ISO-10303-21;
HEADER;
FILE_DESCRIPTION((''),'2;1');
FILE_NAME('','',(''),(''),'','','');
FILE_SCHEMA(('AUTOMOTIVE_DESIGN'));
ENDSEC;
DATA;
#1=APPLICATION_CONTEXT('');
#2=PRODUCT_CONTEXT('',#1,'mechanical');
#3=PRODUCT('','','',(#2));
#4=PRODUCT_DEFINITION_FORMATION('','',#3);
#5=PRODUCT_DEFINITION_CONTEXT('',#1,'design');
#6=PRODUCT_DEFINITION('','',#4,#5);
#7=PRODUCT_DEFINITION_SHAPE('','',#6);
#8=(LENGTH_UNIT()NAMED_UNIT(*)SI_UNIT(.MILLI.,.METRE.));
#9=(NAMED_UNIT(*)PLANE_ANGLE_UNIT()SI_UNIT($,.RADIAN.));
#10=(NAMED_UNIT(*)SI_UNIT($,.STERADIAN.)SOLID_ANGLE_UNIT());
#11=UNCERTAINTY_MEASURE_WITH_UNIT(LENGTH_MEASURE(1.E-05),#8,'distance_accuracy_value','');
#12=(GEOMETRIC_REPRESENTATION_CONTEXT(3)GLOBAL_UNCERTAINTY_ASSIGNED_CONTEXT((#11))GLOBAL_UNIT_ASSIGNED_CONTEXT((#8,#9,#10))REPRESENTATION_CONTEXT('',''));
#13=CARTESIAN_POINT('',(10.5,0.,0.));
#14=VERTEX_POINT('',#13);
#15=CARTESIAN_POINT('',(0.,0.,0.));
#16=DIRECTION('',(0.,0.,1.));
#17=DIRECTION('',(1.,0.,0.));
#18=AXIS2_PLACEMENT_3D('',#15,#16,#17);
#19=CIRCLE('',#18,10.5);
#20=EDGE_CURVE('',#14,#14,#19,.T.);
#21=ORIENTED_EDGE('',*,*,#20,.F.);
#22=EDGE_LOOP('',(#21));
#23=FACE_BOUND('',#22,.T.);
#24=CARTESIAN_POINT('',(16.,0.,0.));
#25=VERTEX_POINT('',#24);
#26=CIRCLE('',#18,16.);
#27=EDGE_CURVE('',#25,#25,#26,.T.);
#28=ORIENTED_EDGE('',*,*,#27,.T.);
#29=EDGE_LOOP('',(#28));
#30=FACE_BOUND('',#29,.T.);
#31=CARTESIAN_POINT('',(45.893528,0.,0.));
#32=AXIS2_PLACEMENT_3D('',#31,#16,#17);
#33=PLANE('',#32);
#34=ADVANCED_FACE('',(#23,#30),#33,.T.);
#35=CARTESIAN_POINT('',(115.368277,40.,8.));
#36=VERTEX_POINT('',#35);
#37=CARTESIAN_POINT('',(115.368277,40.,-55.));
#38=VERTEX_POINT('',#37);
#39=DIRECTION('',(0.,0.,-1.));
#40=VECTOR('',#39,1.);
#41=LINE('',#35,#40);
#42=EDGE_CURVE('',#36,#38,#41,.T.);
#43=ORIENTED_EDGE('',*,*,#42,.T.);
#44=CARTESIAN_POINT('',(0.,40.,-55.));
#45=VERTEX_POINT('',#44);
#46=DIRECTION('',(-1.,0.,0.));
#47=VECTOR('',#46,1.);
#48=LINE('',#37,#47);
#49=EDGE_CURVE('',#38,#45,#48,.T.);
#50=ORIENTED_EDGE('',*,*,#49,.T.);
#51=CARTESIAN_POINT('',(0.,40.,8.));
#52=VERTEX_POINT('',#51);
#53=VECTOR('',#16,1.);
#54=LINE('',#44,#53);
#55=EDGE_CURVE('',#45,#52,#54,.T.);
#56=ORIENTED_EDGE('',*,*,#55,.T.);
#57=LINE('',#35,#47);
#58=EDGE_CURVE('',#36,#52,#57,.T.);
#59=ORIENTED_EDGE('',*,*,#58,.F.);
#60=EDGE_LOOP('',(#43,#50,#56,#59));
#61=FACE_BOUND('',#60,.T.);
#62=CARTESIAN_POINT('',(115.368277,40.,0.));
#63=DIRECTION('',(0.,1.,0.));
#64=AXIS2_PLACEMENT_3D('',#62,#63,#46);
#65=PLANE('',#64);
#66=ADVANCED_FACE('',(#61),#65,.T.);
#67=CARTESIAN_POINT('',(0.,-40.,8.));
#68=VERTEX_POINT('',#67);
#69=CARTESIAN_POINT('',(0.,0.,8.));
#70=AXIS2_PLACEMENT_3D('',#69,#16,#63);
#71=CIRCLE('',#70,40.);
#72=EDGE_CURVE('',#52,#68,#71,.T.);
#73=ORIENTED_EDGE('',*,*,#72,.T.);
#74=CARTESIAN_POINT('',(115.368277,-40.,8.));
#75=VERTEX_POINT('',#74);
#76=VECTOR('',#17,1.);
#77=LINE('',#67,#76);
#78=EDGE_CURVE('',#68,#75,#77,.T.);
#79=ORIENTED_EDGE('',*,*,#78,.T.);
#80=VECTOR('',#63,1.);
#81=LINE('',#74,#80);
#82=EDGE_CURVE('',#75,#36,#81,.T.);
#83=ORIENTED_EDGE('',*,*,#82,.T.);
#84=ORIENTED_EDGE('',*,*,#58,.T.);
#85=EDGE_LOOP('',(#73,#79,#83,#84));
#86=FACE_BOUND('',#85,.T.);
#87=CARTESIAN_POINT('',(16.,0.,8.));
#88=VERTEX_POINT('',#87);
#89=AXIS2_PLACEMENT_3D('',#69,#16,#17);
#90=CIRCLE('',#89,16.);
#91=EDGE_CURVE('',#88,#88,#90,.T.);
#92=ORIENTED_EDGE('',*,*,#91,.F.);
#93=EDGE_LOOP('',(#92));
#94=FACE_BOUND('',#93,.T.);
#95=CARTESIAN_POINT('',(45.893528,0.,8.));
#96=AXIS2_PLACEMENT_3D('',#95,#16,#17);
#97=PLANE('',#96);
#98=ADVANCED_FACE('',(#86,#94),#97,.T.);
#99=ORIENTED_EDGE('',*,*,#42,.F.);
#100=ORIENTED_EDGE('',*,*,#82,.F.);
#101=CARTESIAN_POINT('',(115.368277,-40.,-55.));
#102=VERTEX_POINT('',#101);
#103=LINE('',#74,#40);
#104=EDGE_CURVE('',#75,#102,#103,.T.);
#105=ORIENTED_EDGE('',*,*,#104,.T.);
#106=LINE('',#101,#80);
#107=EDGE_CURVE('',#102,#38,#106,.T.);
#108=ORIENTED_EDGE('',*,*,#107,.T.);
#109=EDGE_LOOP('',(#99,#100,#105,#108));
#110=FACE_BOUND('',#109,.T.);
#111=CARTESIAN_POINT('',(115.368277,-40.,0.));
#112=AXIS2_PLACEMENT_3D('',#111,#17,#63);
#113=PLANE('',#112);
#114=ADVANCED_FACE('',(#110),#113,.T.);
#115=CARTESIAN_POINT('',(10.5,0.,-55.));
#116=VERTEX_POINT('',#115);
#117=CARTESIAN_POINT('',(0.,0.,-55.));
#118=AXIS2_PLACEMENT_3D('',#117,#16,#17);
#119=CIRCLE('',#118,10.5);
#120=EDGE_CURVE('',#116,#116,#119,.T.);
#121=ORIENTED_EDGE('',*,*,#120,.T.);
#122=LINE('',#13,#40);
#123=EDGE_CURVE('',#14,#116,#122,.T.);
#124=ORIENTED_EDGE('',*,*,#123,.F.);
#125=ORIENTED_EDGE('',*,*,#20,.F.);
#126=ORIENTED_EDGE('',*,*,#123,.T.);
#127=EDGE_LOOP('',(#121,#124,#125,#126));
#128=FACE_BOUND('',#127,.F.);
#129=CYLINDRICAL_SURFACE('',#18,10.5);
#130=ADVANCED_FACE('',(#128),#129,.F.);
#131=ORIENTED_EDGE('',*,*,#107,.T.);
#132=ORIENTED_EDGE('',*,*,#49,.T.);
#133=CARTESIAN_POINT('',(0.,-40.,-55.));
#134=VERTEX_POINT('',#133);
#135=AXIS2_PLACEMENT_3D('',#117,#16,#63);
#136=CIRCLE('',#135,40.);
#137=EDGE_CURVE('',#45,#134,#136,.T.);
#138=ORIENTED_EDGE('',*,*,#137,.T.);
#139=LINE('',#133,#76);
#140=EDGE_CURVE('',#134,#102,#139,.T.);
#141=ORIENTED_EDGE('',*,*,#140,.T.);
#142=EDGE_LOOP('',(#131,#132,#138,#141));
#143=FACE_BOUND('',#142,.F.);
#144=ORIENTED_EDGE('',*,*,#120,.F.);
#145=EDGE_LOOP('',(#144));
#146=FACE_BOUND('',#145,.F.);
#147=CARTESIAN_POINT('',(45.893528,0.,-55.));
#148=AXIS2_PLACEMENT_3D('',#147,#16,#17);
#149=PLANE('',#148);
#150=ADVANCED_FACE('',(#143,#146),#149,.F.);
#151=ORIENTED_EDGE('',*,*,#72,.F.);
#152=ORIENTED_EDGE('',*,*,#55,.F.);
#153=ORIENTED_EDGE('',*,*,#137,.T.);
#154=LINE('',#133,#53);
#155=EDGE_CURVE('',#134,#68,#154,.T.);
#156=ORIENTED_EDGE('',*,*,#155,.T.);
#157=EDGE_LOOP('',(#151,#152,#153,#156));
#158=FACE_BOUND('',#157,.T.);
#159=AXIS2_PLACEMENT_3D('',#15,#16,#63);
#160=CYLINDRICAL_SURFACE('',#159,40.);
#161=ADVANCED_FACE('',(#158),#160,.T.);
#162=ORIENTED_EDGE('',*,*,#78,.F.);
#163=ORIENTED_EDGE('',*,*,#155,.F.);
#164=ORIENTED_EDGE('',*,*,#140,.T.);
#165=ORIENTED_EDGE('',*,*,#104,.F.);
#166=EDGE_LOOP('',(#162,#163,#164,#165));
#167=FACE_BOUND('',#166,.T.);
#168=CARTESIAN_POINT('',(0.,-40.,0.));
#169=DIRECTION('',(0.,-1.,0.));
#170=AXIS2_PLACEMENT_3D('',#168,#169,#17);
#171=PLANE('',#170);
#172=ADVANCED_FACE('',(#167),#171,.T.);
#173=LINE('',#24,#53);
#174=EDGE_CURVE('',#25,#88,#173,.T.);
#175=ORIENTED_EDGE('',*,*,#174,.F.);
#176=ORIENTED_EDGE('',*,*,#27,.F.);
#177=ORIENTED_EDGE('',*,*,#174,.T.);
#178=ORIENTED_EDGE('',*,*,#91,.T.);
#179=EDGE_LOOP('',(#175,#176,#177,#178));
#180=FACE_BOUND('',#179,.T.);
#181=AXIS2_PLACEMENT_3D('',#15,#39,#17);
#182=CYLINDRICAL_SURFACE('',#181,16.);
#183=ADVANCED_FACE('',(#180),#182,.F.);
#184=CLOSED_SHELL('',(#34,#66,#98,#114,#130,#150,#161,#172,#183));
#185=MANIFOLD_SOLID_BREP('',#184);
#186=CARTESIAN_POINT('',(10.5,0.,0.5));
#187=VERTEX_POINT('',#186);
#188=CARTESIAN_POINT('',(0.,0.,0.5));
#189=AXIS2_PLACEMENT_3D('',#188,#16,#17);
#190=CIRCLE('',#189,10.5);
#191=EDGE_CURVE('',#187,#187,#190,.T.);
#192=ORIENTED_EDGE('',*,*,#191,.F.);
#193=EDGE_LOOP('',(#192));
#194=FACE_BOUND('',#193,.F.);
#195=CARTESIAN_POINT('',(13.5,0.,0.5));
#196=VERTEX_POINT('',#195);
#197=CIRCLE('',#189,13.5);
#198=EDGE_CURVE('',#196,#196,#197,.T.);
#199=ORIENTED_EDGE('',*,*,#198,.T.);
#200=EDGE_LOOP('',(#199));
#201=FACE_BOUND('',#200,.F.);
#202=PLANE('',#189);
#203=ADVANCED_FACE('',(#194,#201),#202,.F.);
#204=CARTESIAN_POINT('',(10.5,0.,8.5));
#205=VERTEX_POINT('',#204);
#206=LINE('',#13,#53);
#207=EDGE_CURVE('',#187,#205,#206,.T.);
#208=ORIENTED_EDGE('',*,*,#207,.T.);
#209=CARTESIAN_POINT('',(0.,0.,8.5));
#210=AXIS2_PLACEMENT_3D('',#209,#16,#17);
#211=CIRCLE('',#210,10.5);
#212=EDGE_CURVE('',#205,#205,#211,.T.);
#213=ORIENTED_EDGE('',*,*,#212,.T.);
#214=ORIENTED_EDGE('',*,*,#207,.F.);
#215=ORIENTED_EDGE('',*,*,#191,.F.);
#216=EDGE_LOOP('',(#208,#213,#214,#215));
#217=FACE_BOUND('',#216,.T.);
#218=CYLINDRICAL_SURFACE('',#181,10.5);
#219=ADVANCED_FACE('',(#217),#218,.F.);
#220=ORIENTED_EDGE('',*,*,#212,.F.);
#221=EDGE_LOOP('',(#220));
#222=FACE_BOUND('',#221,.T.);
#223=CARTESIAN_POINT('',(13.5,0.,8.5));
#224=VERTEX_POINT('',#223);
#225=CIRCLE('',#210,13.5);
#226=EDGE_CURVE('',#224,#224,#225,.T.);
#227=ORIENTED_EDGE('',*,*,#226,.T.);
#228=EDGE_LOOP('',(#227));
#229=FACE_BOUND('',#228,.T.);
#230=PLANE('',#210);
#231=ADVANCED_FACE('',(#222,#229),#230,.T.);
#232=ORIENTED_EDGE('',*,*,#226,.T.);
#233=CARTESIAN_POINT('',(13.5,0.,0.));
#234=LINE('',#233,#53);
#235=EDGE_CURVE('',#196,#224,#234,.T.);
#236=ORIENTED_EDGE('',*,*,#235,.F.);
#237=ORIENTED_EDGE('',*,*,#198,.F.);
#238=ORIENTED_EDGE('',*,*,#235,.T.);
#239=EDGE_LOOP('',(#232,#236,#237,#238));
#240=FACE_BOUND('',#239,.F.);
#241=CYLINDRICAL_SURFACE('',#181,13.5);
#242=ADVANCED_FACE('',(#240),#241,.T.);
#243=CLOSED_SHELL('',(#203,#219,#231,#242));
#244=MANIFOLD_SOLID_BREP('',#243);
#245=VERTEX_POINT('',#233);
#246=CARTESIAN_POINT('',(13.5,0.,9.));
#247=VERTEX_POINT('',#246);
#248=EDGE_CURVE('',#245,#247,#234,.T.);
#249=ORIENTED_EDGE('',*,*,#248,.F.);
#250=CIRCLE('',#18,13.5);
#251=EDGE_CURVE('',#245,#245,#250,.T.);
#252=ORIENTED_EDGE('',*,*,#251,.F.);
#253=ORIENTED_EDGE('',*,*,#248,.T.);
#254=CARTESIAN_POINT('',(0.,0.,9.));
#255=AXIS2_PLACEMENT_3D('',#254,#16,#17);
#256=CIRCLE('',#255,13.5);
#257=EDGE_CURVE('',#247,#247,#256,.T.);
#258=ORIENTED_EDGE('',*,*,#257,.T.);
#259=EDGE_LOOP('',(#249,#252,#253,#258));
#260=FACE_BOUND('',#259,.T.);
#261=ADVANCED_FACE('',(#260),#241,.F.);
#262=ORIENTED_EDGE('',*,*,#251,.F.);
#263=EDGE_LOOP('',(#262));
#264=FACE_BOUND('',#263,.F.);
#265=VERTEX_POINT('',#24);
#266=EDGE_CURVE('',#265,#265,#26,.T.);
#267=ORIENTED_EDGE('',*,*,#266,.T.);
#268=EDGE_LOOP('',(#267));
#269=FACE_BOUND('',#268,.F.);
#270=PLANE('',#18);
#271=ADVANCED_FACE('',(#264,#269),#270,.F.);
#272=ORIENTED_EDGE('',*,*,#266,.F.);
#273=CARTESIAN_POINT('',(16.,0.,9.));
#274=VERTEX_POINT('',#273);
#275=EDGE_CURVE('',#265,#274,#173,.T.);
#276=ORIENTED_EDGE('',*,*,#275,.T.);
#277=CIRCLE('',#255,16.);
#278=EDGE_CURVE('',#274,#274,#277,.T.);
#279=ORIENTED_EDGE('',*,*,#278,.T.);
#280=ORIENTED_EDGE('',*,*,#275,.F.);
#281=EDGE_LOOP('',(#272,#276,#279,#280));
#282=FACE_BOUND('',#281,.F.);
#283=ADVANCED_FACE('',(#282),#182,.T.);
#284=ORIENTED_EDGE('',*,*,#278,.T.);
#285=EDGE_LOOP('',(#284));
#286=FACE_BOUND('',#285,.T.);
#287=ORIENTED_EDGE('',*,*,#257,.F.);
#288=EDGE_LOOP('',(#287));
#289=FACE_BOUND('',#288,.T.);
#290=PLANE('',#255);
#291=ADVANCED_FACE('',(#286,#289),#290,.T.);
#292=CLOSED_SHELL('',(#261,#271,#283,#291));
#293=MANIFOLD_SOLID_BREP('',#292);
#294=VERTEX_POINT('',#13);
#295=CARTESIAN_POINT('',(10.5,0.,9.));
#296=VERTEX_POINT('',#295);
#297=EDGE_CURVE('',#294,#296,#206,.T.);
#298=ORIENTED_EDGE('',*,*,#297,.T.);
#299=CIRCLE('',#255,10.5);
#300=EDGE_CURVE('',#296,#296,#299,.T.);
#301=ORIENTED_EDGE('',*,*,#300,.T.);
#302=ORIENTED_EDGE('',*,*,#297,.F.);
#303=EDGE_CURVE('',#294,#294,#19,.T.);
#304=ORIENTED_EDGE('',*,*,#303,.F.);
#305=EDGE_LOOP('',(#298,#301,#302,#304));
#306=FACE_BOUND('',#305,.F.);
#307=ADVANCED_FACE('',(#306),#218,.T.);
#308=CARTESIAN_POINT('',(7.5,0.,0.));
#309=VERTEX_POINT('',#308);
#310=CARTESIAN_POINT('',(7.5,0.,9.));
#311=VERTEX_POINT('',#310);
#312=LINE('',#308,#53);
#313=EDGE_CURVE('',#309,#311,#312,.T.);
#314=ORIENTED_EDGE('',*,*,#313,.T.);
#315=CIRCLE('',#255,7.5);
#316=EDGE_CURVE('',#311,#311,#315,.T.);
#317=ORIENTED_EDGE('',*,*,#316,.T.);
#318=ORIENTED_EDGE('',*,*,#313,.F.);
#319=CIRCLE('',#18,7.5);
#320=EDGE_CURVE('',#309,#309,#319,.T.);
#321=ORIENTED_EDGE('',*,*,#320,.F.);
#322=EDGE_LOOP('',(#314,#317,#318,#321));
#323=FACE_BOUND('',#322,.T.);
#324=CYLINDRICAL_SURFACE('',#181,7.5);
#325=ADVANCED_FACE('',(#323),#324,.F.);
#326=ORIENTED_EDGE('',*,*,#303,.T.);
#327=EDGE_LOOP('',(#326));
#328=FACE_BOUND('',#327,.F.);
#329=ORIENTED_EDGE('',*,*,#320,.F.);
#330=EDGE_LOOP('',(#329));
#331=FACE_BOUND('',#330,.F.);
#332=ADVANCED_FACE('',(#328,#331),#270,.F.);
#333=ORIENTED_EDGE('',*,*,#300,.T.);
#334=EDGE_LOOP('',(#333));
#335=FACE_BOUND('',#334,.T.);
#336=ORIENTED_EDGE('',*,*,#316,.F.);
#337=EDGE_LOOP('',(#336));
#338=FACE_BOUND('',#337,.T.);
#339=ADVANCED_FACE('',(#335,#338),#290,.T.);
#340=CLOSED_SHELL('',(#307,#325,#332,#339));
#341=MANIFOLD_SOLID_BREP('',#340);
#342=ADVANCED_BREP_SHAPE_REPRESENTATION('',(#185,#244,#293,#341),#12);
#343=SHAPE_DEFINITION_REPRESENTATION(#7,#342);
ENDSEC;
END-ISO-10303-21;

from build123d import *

# Parameters (mm, degrees)
F0_R     = 16
F0_R_2   = 13.5
F1_DEPTH = 9
F0_R_3   = 10.5
F0_R_4   = 7.5
F2_DEPTH = 8.5
F3_DEPTH = 0.5
F4_R     = 16
F5_DEPTH = 8
F4_R_2   = 10.5
F6_DEPTH = 55


with BuildPart() as f1:
    # F0 (on Top) → F1 (new body)
    with BuildSketch(Plane.XY):
        Circle(F0_R)
        Circle(F0_R_2, mode=Mode.SUBTRACT)
    extrude(amount=F1_DEPTH)


with BuildPart() as f1b:
    # F0 (on Top) → F1, piece 2 (new body)
    with BuildSketch(Plane.XY):
        Circle(F0_R_3)
        Circle(F0_R_4, mode=Mode.SUBTRACT)
    extrude(amount=F1_DEPTH)


with BuildPart() as f2:
    # F0 (on Top) → F2 (new body)
    with BuildSketch(Plane.XY):
        Circle(F0_R_2)
        Circle(F0_R_3, mode=Mode.SUBTRACT)
    extrude(amount=F2_DEPTH)

    # F3 (cut): a face of the model
    f3_faces = [f2.faces().sort_by_distance(p)[0] for p in [
        (-13.1181623382, 0, 0),
    ]]
    extrude(f3_faces, amount=-F3_DEPTH, mode=Mode.SUBTRACT)


with BuildPart() as f5:
    # F4 (on Top) → F5 (new body)
    with BuildSketch(Plane.XY):
        with BuildLine():
            Line((115.3682768345, 40), (0, 40))
            ThreePointArc((0, 40), (-40, 0), (0, -40))
            Line((0, -40), (115.3682768345, -40))
            Line((115.3682768345, -40), (115.3682768345, 40))
        make_face()
        Circle(F4_R, mode=Mode.SUBTRACT)
    extrude(amount=F5_DEPTH)

    # F4 (on Top) → F6 (join)
    with BuildSketch(Plane.XY):
        with BuildLine():
            Line((115.3682768345, 40), (0, 40))
            ThreePointArc((0, 40), (-40, 0), (0, -40))
            Line((0, -40), (115.3682768345, -40))
            Line((115.3682768345, -40), (115.3682768345, 40))
        make_face()
        Circle(F4_R, mode=Mode.SUBTRACT)
        Circle(F4_R)
        Circle(F4_R_2, mode=Mode.SUBTRACT)
    extrude(amount=-F6_DEPTH)


solid = Compound([f1.part, f1b.part, f2.part, f5.part])
